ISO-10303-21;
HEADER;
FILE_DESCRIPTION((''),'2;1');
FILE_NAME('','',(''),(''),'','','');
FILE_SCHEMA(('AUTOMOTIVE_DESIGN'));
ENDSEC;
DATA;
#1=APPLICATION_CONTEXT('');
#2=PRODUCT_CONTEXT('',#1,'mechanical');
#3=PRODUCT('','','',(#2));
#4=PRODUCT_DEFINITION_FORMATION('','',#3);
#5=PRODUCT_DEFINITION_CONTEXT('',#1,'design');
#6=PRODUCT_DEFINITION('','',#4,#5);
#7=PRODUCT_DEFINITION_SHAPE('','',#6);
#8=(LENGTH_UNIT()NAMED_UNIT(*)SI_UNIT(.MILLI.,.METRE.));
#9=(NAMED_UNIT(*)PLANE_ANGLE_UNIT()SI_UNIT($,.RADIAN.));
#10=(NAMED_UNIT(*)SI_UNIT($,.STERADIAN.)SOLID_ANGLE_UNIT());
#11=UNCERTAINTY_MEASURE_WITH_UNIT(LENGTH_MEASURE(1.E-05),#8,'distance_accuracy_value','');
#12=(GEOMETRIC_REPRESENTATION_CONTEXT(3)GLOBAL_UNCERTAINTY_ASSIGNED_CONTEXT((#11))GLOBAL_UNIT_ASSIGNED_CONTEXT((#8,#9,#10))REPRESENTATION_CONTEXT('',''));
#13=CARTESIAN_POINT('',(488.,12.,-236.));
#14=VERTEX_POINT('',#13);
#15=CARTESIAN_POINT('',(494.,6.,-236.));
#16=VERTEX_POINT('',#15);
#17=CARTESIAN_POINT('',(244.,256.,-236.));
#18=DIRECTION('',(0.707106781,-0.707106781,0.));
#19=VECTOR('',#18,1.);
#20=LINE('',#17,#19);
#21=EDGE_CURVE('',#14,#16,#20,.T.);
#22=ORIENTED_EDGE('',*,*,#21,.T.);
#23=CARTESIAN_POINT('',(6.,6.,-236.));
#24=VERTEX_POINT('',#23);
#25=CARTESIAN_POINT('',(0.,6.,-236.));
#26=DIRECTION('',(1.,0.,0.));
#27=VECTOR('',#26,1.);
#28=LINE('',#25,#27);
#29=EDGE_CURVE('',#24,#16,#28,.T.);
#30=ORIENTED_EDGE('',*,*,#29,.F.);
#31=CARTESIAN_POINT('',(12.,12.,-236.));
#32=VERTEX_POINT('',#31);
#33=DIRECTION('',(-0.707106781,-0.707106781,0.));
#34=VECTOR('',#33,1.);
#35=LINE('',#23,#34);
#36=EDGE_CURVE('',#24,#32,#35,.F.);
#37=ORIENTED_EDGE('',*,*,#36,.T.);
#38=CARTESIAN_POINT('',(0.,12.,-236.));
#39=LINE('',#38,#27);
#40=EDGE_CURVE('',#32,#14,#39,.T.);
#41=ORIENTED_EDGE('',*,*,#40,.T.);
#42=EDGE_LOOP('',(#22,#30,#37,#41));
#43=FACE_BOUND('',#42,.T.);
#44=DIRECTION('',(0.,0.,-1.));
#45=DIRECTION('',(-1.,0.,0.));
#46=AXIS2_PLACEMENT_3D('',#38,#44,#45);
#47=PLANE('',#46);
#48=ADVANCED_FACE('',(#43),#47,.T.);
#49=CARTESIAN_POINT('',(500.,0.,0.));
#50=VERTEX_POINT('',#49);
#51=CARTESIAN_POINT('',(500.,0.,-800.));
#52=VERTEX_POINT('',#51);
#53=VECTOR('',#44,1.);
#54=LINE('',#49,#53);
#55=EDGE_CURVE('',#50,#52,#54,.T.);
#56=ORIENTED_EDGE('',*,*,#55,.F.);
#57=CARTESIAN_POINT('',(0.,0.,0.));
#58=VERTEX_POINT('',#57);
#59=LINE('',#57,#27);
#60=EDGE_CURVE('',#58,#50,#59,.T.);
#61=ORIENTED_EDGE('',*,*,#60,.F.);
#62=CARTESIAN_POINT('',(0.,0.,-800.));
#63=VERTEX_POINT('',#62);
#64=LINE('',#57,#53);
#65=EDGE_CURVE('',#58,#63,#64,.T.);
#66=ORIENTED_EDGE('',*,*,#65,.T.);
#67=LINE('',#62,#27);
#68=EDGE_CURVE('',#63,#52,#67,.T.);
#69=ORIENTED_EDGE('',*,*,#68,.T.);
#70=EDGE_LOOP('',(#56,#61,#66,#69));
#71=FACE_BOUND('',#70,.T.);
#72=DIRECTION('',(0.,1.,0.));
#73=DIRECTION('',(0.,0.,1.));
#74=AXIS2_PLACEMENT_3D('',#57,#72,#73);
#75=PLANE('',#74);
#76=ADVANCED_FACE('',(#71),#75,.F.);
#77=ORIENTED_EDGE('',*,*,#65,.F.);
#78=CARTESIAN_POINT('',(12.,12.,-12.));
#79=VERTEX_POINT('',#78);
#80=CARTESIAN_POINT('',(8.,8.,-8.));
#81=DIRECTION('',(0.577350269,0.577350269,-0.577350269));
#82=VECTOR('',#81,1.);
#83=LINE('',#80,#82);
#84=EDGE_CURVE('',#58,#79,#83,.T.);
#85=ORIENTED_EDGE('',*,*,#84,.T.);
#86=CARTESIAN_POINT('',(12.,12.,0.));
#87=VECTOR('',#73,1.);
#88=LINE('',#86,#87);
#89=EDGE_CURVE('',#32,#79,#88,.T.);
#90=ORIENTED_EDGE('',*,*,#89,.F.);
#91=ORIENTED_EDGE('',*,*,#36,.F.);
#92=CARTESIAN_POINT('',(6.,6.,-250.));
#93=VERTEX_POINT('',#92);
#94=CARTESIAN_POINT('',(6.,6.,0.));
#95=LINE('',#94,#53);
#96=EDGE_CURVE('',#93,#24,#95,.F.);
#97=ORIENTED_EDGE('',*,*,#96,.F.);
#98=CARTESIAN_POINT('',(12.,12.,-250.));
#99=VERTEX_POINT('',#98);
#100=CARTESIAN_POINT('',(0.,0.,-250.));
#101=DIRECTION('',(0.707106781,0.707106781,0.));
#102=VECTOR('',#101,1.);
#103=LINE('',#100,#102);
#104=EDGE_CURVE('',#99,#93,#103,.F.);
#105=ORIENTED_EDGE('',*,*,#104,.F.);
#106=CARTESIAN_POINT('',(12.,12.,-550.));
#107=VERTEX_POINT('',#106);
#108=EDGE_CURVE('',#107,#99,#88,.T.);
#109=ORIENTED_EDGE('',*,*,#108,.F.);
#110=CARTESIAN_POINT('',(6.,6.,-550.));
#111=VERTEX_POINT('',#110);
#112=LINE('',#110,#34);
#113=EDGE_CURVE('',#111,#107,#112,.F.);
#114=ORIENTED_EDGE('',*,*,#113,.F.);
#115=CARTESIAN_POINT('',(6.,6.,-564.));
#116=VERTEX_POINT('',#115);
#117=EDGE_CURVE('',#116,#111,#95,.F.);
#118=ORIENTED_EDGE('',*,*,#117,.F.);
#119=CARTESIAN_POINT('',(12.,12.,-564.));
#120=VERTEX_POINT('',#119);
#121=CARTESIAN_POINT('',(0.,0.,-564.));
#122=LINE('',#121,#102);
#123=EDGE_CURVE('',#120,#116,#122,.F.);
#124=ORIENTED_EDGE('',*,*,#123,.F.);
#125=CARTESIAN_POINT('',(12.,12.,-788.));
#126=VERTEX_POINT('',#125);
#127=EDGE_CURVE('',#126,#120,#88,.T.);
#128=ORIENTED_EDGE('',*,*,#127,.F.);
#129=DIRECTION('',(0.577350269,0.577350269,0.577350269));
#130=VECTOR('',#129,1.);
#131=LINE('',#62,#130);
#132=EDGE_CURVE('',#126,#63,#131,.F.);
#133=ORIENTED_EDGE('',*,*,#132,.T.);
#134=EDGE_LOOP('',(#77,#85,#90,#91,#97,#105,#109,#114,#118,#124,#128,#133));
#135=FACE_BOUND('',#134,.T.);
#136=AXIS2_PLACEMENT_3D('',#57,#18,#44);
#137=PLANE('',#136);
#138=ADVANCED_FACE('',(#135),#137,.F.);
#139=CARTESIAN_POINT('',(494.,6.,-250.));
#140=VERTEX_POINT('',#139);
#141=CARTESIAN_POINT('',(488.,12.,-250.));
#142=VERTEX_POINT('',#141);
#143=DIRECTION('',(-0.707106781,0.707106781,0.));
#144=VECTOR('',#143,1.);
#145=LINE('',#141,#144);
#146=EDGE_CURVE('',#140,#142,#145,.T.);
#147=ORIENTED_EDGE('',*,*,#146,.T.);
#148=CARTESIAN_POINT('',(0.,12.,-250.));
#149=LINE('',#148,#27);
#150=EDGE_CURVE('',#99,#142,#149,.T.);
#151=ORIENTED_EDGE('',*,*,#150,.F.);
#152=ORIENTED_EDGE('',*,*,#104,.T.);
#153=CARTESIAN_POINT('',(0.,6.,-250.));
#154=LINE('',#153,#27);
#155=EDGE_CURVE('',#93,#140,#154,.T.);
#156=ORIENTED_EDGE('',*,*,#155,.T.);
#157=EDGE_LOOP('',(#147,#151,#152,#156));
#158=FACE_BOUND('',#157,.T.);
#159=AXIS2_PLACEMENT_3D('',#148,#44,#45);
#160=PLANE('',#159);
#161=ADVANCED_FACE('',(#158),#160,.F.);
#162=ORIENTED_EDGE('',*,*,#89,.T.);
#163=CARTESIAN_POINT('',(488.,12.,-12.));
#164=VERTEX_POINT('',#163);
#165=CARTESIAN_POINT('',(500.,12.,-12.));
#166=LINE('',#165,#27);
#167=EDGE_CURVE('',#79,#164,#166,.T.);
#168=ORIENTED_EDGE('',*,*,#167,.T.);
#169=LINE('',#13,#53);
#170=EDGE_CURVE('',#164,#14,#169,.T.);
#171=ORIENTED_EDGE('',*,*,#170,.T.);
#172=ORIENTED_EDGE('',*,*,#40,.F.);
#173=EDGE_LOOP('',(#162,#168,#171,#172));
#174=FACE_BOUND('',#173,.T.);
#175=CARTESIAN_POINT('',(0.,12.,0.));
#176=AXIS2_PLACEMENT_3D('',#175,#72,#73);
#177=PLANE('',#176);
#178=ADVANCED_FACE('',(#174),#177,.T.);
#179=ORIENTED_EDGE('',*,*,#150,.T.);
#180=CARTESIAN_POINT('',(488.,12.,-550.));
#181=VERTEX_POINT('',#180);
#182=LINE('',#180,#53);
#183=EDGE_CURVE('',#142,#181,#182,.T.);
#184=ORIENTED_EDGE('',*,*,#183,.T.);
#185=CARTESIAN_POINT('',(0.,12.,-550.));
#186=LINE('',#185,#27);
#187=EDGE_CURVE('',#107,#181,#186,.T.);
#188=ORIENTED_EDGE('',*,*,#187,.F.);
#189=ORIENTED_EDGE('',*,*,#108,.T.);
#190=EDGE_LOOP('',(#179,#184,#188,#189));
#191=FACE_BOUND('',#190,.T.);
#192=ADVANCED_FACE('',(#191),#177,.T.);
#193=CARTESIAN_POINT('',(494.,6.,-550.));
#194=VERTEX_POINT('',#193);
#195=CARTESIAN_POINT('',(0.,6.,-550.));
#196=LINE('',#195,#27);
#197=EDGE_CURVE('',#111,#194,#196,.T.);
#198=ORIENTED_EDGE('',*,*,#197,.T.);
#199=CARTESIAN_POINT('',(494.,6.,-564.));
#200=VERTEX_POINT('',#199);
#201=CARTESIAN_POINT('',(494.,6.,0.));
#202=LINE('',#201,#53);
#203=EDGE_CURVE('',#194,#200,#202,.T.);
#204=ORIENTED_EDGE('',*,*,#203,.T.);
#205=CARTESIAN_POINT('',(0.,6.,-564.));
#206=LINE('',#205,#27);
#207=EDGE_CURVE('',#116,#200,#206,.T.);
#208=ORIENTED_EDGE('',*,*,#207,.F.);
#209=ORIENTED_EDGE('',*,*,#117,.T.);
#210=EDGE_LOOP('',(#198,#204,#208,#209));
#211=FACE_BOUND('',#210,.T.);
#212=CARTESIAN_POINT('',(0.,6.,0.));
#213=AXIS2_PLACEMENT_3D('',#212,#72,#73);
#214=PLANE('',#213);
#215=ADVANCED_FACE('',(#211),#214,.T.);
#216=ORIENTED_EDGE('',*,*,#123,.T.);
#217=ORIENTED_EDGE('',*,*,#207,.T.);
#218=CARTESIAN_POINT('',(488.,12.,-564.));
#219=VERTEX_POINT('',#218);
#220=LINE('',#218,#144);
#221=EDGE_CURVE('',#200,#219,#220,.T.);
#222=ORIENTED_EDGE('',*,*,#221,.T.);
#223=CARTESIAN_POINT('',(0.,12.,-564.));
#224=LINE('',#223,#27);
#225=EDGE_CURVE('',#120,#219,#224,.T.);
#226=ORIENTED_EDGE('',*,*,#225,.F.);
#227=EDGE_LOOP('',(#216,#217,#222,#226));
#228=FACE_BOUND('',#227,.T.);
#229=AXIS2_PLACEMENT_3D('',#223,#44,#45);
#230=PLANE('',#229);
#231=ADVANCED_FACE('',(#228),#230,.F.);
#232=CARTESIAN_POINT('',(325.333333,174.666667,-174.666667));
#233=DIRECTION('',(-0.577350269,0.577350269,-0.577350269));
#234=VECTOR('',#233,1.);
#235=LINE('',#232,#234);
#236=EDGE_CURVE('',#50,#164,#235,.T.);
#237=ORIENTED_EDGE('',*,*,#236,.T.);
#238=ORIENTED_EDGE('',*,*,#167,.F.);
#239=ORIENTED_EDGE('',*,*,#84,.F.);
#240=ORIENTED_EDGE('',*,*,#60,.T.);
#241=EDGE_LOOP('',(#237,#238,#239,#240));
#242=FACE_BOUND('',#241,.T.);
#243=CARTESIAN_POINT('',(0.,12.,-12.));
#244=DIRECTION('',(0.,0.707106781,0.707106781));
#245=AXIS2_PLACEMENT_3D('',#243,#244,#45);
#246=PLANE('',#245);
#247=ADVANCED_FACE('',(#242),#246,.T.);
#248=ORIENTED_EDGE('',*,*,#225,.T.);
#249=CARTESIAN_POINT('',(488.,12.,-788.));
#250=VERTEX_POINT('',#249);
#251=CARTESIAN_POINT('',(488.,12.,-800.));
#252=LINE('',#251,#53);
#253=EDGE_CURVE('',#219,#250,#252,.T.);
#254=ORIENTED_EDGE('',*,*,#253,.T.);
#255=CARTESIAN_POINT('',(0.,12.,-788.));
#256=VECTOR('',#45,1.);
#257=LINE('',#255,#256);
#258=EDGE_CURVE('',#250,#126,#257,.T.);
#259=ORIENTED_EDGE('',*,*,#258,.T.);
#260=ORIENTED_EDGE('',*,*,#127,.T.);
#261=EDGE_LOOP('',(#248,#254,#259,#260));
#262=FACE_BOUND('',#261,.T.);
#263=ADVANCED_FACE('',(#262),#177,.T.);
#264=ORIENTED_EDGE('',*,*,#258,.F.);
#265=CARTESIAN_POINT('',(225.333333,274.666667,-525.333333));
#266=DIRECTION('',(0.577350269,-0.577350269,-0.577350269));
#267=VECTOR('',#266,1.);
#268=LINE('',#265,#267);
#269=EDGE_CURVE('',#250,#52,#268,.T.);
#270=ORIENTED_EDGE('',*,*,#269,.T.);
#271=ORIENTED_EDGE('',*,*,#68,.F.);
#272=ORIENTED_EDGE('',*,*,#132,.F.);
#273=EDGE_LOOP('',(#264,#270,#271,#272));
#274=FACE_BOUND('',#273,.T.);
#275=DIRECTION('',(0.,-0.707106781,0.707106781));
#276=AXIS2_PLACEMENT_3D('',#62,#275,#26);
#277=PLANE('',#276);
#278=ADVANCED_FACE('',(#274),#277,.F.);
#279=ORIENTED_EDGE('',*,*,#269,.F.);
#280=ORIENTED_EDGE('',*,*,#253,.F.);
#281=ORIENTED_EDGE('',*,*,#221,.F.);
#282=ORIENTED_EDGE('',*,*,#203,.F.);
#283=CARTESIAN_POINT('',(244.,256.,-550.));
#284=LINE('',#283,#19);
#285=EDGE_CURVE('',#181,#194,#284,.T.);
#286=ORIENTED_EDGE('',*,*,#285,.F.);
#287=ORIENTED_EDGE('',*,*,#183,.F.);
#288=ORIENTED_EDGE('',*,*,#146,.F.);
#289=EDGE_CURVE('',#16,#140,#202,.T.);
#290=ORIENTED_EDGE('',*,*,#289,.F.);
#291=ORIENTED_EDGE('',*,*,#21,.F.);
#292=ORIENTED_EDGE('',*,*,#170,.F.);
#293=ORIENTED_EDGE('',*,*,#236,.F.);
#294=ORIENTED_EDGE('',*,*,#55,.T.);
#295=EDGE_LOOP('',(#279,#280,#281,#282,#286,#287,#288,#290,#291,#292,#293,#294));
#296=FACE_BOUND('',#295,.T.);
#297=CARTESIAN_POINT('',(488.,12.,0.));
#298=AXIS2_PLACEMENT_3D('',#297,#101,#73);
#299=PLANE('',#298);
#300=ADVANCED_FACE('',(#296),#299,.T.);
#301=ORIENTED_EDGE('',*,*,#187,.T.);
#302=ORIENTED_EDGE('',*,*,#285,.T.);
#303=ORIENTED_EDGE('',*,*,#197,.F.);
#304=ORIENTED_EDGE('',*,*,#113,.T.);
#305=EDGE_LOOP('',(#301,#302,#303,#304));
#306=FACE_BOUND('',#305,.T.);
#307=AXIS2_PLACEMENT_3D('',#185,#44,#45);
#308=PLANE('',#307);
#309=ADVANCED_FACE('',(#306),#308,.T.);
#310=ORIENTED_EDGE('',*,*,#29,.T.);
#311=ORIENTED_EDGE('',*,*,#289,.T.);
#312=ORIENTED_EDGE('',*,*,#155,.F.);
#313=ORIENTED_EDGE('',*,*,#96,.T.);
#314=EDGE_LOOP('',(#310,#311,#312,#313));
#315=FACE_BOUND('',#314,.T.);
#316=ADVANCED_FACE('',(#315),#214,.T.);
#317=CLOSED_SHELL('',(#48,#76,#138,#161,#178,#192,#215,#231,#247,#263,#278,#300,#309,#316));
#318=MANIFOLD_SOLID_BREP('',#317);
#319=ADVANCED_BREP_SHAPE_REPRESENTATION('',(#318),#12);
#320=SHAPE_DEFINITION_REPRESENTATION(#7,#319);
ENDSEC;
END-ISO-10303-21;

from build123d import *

# Parameters (mm, degrees)
SKETCH5_W             = 500
SKETCH5_H             = 300
BOSS_EXTRUDE1_DEPTH   = 12
SKETCH5_H_2           = 224
BOSS_EXTRUDE1_2_DEPTH = 12
BOSS_EXTRUDE1_3_DEPTH = 12
SKETCH5_3_W           = 500
SKETCH5_3_H           = 14
BOSS_EXTRUDE2_DEPTH   = 6
SKETCH5_4_W           = 500
SKETCH5_4_H           = 12
BOSS_EXTRUDE3_DEPTH   = 12
CHAMFER1_SIZE         = 12


with BuildPart() as part:
    # Sketch5 → Boss-Extrude1 (new body)
    with BuildSketch(Plane(origin=(0, 0, 0), x_dir=(1, 0, 0), z_dir=(0, 1, 0))):
        with Locations((250, 400)):
            Rectangle(SKETCH5_W, SKETCH5_H)
    extrude(amount=BOSS_EXTRUDE1_DEPTH)



with BuildPart() as body_2:
    # Sketch5 → Boss-Extrude1 2 (new body)
    with BuildSketch(Plane(origin=(0, 0, 0), x_dir=(1, 0, 0), z_dir=(0, 1, 0))):
        with Locations((250, 124)):
            Rectangle(SKETCH5_W, SKETCH5_H_2)
    extrude(amount=BOSS_EXTRUDE1_2_DEPTH)


with BuildPart() as body_3:
    # Sketch5 → Boss-Extrude1 3 (new body)
    with BuildSketch(Plane(origin=(0, 0, 0), x_dir=(1, 0, 0), z_dir=(0, 1, 0))):
        with Locations((250, 676)):
            Rectangle(SKETCH5_W, SKETCH5_H_2)
    extrude(amount=BOSS_EXTRUDE1_3_DEPTH)


with BuildPart() as part_1:
    add(part.part)

    add(body_2.part)  # Boss-Extrude2 merges body 2

    add(body_3.part)  # Boss-Extrude2 merges body 3
    # Sketch5<3> → Boss-Extrude2 (add)
    with BuildSketch(Plane(origin=(0, 0, 0), x_dir=(1, 0, 0), z_dir=(0, 1, 0))):
        with Locations((250, 243)):
            Rectangle(SKETCH5_3_W, SKETCH5_3_H)
        with Locations((250, 557)):
            Rectangle(SKETCH5_3_W, SKETCH5_3_H)
    extrude(amount=BOSS_EXTRUDE2_DEPTH)

    # Sketch5<4> → Boss-Extrude3 (add)
    with BuildSketch(Plane(origin=(0, 0, 0), x_dir=(1, 0, 0), z_dir=(0, 1, 0))):
        with Locations((250, 6)):
            Rectangle(SKETCH5_4_W, SKETCH5_4_H)
        with Locations((250, 794)):
            Rectangle(SKETCH5_4_W, SKETCH5_4_H)
    extrude(amount=BOSS_EXTRUDE3_DEPTH)

    # Chamfer1
    # the kernel refuses this chamfer: 12 mm, written as the material it takes off along each edge
    with BuildSketch(Plane(origin=(0, 12, -580.860195856), x_dir=(-0.027495876610586372, -0.9996219169112968, 0), z_dir=(0, 0, 1)), Plane(origin=(500, 12, -219.139804144), x_dir=(0.027495876610586778, -0.9996219169112968, 0), z_dir=(0, 0, -1))) as chamfer1_piece_1:
        Polygon((CHAMFER1_SIZE * 0.999621916911, CHAMFER1_SIZE * 0.0274958766106), (-CHAMFER1_SIZE * 0.0274958766106, CHAMFER1_SIZE * 0.999621916911), (0, 0), align=None)
    extrude(amount=361.720391711, mode=Mode.SUBTRACT)
    with BuildSketch(Plane(origin=(0, 12, 30.860195856), x_dir=(-0.027495876610586372, -0.9996219169112968, 0), z_dir=(0, 0, -1)), Plane(origin=(0, 12, -533.139804144), x_dir=(-0.027495876610586372, -0.9996219169112968, 0), z_dir=(0, 0, -1))) as chamfer1_piece_2:
        Polygon((CHAMFER1_SIZE * 0.999621916911, -CHAMFER1_SIZE * 0.0274958766106), (-CHAMFER1_SIZE * 0.0274958766106, -CHAMFER1_SIZE * 0.999621916911), (0, 0), align=None)
    extrude(amount=297.720391711, mode=Mode.SUBTRACT)
    with BuildSketch(Plane(origin=(500, 12, 30.860195856), x_dir=(0.027495876610586778, -0.9996219169112968, 0), z_dir=(0, 0, -1)), Plane(origin=(500, 12, -533.139804144), x_dir=(0.027495876610586778, -0.9996219169112968, 0), z_dir=(0, 0, -1))) as chamfer1_piece_3:
        Polygon((CHAMFER1_SIZE * 0.999621916911, CHAMFER1_SIZE * 0.0274958766106), (-CHAMFER1_SIZE * 0.0274958766106, CHAMFER1_SIZE * 0.999621916911), (0, 0), align=None)
    extrude(amount=297.720391711, mode=Mode.SUBTRACT)
    with BuildSketch(Plane(origin=(-30.860195856, 12, 0), x_dir=(0, -0.9996219169112968, 0.027495876610586372), z_dir=(1, 0, 0))) as chamfer1_piece_4:
        Polygon((CHAMFER1_SIZE * 0.999621916911, CHAMFER1_SIZE * 0.0274958766106), (-CHAMFER1_SIZE * 0.0274958766106, CHAMFER1_SIZE * 0.999621916911), (0, 0), align=None)
    extrude(amount=561.720391711, mode=Mode.SUBTRACT)
    with BuildSketch(Plane(origin=(530.860195856, 12, -800), x_dir=(0, 0.027495876610586462, 0.9996219169112968), z_dir=(-1, 0, 0))) as chamfer1_piece_5:
        Polygon((CHAMFER1_SIZE * 0.999621916911, -CHAMFER1_SIZE * 0.0274958766106), (-CHAMFER1_SIZE * 0.0274958766106, -CHAMFER1_SIZE * 0.999621916911), (0, 0), align=None)
    extrude(amount=561.720391711, mode=Mode.SUBTRACT)


solid = part_1.part
